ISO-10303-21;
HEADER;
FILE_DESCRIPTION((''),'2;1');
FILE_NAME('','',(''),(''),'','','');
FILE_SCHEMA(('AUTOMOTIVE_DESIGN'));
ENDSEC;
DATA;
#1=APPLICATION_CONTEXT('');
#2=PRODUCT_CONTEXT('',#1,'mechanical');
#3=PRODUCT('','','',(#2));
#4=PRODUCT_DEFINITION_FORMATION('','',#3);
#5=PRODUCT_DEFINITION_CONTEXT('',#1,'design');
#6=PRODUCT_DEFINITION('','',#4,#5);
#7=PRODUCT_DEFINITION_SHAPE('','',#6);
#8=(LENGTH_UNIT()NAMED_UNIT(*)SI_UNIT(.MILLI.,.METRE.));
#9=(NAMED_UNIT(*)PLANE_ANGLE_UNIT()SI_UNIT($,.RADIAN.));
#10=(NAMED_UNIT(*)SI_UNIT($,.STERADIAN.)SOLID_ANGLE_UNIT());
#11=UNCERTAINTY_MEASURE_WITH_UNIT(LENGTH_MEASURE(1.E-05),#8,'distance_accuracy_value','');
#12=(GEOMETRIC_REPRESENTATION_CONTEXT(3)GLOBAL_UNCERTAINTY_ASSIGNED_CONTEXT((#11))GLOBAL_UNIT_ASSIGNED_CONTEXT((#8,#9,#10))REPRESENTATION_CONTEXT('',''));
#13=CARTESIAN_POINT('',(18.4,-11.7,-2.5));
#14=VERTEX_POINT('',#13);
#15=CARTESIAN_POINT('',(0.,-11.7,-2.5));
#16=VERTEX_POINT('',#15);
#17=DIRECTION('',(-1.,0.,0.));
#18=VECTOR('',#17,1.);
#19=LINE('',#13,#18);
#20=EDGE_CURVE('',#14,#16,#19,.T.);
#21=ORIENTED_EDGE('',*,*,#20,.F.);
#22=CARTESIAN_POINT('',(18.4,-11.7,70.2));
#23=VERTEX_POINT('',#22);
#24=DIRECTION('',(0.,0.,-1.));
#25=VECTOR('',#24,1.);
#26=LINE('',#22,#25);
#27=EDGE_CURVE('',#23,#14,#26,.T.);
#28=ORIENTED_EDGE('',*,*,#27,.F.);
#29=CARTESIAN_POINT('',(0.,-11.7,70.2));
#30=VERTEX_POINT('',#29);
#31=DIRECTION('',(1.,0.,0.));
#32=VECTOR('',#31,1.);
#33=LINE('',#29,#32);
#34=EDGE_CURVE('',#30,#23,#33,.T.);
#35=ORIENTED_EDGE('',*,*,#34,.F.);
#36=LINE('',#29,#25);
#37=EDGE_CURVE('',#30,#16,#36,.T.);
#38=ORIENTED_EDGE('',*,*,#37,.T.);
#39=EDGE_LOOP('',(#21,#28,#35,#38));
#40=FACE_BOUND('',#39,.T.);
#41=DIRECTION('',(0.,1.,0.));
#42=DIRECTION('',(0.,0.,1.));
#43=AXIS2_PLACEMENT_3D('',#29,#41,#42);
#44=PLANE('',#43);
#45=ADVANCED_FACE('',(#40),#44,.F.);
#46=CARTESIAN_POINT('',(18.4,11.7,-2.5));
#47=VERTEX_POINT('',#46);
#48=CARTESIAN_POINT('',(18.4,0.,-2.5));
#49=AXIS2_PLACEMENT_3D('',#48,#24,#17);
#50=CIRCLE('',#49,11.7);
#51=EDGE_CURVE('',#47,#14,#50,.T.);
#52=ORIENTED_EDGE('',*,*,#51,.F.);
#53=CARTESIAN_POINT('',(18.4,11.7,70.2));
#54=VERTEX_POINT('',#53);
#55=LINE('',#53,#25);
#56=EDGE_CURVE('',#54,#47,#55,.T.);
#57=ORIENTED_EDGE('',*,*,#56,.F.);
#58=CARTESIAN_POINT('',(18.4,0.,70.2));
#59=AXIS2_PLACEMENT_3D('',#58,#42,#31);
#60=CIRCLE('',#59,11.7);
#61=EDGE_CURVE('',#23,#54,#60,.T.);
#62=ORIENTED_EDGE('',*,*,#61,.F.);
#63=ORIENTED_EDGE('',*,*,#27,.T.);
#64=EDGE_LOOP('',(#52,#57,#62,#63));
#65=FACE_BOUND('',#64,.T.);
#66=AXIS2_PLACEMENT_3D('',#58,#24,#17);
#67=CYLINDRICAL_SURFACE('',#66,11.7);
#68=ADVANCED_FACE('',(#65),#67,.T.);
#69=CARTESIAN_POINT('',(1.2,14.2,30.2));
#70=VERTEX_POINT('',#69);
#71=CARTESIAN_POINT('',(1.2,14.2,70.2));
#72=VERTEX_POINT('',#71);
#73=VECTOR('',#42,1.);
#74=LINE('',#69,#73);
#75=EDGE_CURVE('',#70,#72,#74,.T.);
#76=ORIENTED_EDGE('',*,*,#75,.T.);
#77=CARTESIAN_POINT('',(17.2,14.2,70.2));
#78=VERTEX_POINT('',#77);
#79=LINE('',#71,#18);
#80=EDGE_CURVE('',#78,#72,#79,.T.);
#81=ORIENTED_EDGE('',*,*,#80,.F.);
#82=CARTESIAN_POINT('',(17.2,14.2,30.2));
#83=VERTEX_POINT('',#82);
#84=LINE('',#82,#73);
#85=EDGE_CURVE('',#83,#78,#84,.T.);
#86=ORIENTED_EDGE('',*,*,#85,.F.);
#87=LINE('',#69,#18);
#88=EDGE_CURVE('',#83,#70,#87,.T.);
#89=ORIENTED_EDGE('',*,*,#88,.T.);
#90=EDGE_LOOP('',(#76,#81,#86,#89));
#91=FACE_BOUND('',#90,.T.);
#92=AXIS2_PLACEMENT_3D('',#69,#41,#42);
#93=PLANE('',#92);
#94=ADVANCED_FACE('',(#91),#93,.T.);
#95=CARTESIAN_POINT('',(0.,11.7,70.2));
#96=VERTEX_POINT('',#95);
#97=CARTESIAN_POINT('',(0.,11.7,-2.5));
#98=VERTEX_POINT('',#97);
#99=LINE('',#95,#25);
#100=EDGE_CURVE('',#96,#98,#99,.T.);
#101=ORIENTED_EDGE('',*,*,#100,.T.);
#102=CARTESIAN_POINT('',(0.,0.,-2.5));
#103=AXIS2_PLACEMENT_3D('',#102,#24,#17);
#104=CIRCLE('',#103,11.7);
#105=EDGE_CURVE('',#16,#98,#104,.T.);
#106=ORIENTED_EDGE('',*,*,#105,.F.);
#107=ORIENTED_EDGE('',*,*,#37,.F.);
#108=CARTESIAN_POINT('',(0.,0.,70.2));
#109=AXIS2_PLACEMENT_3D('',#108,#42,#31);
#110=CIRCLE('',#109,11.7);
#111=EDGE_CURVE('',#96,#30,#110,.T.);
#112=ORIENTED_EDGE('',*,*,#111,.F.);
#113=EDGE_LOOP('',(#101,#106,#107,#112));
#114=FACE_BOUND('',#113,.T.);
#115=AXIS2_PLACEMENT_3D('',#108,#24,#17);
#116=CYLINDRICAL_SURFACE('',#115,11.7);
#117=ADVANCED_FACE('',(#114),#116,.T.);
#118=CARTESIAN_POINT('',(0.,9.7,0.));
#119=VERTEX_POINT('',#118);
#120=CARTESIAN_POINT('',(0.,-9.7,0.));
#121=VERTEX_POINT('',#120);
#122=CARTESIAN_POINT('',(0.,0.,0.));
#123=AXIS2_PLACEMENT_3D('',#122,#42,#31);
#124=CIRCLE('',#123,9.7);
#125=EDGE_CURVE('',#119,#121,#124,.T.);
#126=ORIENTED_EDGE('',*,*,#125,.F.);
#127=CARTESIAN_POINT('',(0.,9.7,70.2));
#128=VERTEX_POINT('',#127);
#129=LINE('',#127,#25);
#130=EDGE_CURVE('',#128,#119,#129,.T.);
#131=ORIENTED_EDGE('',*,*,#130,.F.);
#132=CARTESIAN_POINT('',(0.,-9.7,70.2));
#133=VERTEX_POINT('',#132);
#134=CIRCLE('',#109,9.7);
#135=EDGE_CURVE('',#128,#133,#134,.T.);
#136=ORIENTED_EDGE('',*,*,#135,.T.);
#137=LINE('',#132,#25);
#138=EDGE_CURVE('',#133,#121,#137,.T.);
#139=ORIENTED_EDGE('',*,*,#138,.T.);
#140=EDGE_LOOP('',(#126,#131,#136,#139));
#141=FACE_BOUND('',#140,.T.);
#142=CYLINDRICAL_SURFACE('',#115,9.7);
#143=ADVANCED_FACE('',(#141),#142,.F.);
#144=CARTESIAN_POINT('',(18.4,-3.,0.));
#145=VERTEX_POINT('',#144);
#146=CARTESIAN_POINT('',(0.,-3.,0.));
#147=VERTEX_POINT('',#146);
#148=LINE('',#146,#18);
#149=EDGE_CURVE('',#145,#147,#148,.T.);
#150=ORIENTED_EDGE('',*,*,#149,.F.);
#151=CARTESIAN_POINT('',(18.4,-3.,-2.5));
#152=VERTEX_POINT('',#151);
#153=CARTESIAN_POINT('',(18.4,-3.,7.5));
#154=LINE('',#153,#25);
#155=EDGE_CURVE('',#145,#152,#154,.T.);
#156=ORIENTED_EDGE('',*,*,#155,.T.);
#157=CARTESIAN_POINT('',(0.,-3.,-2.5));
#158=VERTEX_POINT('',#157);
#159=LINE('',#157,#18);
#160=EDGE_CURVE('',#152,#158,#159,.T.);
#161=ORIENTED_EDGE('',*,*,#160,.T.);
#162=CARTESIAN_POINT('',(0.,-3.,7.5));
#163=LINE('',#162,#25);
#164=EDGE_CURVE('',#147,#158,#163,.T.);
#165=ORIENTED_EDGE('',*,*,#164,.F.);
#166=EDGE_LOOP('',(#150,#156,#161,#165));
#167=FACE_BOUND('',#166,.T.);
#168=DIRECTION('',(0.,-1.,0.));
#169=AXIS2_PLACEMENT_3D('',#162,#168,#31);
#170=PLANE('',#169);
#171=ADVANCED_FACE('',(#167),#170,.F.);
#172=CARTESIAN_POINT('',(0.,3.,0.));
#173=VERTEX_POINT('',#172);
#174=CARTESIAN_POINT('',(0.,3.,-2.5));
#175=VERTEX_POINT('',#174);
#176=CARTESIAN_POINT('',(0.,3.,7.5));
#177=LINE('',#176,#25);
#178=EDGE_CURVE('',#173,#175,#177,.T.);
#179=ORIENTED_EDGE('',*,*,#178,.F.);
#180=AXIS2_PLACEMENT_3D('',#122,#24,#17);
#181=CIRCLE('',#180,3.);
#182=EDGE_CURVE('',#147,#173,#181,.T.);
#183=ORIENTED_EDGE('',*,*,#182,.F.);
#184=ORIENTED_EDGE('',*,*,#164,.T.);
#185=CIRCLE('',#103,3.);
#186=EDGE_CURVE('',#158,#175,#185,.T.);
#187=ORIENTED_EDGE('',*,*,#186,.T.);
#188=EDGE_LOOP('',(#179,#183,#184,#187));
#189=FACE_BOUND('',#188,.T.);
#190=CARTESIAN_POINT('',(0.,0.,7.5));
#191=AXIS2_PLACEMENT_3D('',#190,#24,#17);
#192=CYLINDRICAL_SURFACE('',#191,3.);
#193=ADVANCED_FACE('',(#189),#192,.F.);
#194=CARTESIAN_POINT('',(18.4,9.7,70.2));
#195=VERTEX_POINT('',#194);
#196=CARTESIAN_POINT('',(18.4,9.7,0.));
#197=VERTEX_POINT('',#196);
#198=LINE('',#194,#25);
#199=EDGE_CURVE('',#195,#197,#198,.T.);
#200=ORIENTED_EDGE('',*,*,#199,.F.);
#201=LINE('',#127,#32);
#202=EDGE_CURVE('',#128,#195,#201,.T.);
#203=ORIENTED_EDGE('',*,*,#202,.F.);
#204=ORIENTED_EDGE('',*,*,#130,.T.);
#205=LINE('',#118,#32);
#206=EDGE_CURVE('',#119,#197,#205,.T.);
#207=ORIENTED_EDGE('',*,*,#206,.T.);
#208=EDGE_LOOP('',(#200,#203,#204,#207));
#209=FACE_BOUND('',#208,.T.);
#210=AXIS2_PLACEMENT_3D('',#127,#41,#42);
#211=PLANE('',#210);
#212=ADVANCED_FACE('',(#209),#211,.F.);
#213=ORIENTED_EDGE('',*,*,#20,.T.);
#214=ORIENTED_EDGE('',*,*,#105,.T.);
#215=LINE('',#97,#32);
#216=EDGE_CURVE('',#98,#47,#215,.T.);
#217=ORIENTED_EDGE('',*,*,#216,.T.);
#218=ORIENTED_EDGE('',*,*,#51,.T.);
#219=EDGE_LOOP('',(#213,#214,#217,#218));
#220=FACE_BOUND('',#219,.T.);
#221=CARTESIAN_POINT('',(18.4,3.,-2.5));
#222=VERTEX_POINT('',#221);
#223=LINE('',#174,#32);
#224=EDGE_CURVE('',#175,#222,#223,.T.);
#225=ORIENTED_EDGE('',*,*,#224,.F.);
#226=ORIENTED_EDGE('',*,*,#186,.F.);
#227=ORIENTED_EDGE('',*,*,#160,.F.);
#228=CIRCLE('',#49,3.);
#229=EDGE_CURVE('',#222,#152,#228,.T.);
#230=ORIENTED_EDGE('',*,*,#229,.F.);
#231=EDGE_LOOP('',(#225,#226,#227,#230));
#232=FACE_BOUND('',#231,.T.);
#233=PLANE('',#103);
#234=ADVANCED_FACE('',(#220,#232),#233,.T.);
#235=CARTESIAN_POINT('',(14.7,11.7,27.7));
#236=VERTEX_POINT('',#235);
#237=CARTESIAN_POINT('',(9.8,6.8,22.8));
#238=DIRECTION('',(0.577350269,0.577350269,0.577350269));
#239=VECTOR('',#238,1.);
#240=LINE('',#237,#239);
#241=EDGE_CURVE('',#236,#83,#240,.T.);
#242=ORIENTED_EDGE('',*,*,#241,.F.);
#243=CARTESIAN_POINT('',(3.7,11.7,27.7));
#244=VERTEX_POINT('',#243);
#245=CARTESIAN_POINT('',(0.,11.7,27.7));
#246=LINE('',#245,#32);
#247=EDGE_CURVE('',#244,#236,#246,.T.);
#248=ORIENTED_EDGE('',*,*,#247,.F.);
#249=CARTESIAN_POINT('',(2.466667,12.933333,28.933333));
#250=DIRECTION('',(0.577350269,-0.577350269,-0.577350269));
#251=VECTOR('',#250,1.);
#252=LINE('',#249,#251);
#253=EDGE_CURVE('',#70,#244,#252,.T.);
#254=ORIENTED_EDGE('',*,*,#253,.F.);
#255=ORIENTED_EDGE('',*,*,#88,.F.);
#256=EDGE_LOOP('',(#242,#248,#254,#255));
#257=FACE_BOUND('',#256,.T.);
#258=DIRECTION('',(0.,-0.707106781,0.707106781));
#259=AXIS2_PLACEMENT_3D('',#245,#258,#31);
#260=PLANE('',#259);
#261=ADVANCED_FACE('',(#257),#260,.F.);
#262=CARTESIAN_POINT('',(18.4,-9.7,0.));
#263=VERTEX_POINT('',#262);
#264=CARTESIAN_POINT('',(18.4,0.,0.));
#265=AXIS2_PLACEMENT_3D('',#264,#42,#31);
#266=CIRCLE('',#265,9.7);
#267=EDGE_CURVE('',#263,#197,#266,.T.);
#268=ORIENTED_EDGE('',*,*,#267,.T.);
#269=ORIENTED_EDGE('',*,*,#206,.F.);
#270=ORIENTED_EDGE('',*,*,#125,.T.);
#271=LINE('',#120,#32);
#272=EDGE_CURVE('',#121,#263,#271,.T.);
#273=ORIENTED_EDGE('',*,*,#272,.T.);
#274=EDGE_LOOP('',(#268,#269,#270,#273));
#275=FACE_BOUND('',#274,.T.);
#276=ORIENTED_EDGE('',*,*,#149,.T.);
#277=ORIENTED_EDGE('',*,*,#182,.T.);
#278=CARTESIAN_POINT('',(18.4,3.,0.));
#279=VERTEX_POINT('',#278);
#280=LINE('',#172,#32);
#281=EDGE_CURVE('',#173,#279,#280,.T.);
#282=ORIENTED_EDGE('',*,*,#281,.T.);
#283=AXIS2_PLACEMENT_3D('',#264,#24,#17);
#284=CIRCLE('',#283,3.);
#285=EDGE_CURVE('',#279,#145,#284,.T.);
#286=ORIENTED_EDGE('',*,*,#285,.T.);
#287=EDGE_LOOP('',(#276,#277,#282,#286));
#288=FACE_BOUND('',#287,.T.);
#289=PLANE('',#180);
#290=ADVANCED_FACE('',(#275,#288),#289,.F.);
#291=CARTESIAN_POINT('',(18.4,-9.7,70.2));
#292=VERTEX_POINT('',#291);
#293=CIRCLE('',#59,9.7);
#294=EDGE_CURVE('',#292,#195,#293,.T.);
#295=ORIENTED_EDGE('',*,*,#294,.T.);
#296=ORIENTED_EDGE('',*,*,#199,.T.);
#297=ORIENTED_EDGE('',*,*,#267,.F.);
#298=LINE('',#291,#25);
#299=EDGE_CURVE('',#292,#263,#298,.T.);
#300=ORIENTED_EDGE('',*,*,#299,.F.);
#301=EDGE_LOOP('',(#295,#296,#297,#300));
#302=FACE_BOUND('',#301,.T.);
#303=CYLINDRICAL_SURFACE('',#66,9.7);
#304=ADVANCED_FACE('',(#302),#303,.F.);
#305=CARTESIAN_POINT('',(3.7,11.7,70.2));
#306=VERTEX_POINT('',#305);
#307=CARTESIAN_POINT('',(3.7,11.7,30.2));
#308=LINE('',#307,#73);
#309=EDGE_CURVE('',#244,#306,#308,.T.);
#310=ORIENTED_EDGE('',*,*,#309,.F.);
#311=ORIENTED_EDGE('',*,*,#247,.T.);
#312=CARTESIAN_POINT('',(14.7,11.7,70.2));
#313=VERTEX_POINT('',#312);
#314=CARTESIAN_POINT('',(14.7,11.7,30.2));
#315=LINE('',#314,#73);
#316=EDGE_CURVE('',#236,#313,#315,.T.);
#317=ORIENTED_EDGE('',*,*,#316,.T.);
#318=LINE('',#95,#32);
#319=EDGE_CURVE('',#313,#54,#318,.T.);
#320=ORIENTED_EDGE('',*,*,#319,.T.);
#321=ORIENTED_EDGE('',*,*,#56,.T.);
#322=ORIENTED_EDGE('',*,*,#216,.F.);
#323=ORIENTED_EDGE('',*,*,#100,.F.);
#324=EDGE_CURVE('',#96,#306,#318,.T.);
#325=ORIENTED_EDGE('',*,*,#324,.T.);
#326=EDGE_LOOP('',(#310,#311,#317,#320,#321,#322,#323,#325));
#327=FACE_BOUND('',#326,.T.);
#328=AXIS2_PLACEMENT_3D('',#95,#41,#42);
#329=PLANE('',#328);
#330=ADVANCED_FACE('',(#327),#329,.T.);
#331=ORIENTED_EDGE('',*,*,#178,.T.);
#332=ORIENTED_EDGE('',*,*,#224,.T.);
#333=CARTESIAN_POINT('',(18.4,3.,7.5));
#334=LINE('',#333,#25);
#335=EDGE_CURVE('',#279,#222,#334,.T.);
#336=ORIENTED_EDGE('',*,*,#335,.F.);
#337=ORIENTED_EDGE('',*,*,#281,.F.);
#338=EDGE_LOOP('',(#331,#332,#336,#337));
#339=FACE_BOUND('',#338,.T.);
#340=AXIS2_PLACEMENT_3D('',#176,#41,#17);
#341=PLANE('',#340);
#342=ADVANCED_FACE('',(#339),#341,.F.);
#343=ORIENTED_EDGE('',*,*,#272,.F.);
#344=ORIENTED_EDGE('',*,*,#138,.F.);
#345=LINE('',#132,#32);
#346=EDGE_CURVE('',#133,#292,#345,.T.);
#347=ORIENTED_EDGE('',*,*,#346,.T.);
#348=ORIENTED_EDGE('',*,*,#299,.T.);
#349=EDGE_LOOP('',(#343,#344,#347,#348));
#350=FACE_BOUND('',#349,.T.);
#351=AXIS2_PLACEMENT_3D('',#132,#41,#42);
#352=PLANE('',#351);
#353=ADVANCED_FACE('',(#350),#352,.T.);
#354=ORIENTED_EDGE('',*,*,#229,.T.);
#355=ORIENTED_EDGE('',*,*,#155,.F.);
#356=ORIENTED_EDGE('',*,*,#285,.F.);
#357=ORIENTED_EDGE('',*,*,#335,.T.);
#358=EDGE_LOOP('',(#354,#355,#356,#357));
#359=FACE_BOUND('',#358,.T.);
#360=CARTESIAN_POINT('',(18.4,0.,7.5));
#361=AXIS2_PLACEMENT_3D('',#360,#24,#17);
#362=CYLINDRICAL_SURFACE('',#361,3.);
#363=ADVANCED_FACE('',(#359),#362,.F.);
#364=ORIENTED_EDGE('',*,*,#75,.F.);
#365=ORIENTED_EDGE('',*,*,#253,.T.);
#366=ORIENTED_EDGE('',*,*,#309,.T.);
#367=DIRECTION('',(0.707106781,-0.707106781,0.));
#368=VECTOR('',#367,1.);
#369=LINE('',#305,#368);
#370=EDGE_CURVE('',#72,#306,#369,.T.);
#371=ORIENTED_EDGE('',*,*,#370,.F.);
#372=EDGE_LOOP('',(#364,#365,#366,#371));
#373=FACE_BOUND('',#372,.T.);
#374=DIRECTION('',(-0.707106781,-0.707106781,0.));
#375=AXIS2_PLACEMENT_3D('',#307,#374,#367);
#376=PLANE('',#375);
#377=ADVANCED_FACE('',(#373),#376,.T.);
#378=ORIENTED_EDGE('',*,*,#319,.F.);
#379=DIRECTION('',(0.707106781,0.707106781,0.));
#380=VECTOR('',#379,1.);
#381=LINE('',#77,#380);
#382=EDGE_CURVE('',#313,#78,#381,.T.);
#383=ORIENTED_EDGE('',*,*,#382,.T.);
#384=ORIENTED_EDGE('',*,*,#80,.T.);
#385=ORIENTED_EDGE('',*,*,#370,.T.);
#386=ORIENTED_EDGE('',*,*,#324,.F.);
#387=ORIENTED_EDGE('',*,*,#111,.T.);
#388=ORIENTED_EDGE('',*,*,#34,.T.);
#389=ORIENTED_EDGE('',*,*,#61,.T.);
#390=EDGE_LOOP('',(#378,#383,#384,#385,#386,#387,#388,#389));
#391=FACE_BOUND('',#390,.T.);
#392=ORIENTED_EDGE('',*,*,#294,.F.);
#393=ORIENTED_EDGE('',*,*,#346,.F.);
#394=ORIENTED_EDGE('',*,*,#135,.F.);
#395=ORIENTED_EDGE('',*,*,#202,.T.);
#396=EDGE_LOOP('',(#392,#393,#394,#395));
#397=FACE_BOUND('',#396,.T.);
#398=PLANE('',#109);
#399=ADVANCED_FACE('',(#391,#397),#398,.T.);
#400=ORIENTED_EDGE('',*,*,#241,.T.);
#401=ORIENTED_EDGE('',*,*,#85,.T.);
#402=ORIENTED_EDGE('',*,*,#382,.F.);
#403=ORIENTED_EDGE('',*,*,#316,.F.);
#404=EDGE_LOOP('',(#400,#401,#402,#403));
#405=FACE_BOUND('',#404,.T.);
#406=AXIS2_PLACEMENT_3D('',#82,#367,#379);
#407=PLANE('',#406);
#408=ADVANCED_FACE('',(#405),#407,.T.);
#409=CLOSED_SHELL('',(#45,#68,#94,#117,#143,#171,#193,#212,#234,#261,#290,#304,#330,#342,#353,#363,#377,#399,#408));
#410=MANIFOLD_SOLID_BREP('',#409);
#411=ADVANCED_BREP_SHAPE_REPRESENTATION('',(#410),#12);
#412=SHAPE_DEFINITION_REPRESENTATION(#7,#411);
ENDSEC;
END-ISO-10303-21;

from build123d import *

# Parameters (mm, degrees)
Y_KSEKLIK_EKSTR_ZYON1_DEPTH = 70.2
Y_KSEKLIK_EKSTR_ZYON2_START = 2.5
Y_KSEKLIK_EKSTR_ZYON2_DEPTH = 2.5
Y_KSEKLIK_EKSTR_ZYON5_DEPTH = 40
PAH1_SIZE                   = 2.5
KES_EKSTR_ZYON1_DEPTH       = 10


with BuildPart() as part:
    # Çizim1 → Yükseklik-Ekstrüzyon1 (new body)
    with BuildSketch(Plane.XY):
        with BuildLine():
            Line((0, 11.7), (18.4, 11.7))
            ThreePointArc((18.4, 11.7), (30.1, 0), (18.4, -11.7))
            Line((18.4, -11.7), (0, -11.7))
            ThreePointArc((0, -11.7), (-11.7, 0), (0, 11.7))
        make_face()
        with BuildLine():
            ThreePointArc((0, 9.7), (-9.7, 0), (0, -9.7))
            Line((0, -9.7), (18.4, -9.7))
            ThreePointArc((18.4, -9.7), (28.1, 0), (18.4, 9.7))
            Line((18.4, 9.7), (0, 9.7))
        make_face(mode=Mode.SUBTRACT)
    extrude(amount=Y_KSEKLIK_EKSTR_ZYON1_DEPTH)

    # Çizim2 → Yükseklik-Ekstrüzyon2 (add)
    with BuildSketch(Plane(origin=(0, 0, 0), x_dir=(-1, 0, 0), z_dir=(0, 0, -1)).offset(Y_KSEKLIK_EKSTR_ZYON2_START)):
        with BuildLine():
            Line((0, 11.7), (-18.4, 11.7))
            ThreePointArc((-18.4, 11.7), (-30.1, 0), (-18.4, -11.7))
            Line((-18.4, -11.7), (0, -11.7))
            ThreePointArc((0, -11.7), (11.7, 0), (0, 11.7))
        make_face()
    extrude(amount=-Y_KSEKLIK_EKSTR_ZYON2_DEPTH)

    # Çizim8 → Yükseklik-Ekstrüzyon5 (add)
    with BuildSketch(Plane.XY.offset(70.2)):
        Polygon((14.7, 11.7), (3.7, 11.7), (1.2, 14.2), (17.2, 14.2), align=None)
    extrude(amount=-Y_KSEKLIK_EKSTR_ZYON5_DEPTH)

    # Pah1
    pah1_edges = [part.edges().sort_by_distance(p)[0] for p in [
        (9.2, 11.7, 30.2),
    ]]
    chamfer(pah1_edges, length=PAH1_SIZE - 0.0001)  # a hair under: the kernel refuses the full size

    # Çizim9 → Kes-Ekstrüzyon1 (cut)
    with BuildSketch(Plane(origin=(0, 0, -2.5), x_dir=(-1, 0, 0), z_dir=(0, 0, -1))):
        with BuildLine():
            Line((0, -3), (-18.4, -3))
            ThreePointArc((-18.4, -3), (-21.4, 0), (-18.4, 3))
            Line((-18.4, 3), (0, 3))
            ThreePointArc((0, 3), (3, 0), (0, -3))
        make_face()
    extrude(amount=-KES_EKSTR_ZYON1_DEPTH, mode=Mode.SUBTRACT)


solid = part.part
